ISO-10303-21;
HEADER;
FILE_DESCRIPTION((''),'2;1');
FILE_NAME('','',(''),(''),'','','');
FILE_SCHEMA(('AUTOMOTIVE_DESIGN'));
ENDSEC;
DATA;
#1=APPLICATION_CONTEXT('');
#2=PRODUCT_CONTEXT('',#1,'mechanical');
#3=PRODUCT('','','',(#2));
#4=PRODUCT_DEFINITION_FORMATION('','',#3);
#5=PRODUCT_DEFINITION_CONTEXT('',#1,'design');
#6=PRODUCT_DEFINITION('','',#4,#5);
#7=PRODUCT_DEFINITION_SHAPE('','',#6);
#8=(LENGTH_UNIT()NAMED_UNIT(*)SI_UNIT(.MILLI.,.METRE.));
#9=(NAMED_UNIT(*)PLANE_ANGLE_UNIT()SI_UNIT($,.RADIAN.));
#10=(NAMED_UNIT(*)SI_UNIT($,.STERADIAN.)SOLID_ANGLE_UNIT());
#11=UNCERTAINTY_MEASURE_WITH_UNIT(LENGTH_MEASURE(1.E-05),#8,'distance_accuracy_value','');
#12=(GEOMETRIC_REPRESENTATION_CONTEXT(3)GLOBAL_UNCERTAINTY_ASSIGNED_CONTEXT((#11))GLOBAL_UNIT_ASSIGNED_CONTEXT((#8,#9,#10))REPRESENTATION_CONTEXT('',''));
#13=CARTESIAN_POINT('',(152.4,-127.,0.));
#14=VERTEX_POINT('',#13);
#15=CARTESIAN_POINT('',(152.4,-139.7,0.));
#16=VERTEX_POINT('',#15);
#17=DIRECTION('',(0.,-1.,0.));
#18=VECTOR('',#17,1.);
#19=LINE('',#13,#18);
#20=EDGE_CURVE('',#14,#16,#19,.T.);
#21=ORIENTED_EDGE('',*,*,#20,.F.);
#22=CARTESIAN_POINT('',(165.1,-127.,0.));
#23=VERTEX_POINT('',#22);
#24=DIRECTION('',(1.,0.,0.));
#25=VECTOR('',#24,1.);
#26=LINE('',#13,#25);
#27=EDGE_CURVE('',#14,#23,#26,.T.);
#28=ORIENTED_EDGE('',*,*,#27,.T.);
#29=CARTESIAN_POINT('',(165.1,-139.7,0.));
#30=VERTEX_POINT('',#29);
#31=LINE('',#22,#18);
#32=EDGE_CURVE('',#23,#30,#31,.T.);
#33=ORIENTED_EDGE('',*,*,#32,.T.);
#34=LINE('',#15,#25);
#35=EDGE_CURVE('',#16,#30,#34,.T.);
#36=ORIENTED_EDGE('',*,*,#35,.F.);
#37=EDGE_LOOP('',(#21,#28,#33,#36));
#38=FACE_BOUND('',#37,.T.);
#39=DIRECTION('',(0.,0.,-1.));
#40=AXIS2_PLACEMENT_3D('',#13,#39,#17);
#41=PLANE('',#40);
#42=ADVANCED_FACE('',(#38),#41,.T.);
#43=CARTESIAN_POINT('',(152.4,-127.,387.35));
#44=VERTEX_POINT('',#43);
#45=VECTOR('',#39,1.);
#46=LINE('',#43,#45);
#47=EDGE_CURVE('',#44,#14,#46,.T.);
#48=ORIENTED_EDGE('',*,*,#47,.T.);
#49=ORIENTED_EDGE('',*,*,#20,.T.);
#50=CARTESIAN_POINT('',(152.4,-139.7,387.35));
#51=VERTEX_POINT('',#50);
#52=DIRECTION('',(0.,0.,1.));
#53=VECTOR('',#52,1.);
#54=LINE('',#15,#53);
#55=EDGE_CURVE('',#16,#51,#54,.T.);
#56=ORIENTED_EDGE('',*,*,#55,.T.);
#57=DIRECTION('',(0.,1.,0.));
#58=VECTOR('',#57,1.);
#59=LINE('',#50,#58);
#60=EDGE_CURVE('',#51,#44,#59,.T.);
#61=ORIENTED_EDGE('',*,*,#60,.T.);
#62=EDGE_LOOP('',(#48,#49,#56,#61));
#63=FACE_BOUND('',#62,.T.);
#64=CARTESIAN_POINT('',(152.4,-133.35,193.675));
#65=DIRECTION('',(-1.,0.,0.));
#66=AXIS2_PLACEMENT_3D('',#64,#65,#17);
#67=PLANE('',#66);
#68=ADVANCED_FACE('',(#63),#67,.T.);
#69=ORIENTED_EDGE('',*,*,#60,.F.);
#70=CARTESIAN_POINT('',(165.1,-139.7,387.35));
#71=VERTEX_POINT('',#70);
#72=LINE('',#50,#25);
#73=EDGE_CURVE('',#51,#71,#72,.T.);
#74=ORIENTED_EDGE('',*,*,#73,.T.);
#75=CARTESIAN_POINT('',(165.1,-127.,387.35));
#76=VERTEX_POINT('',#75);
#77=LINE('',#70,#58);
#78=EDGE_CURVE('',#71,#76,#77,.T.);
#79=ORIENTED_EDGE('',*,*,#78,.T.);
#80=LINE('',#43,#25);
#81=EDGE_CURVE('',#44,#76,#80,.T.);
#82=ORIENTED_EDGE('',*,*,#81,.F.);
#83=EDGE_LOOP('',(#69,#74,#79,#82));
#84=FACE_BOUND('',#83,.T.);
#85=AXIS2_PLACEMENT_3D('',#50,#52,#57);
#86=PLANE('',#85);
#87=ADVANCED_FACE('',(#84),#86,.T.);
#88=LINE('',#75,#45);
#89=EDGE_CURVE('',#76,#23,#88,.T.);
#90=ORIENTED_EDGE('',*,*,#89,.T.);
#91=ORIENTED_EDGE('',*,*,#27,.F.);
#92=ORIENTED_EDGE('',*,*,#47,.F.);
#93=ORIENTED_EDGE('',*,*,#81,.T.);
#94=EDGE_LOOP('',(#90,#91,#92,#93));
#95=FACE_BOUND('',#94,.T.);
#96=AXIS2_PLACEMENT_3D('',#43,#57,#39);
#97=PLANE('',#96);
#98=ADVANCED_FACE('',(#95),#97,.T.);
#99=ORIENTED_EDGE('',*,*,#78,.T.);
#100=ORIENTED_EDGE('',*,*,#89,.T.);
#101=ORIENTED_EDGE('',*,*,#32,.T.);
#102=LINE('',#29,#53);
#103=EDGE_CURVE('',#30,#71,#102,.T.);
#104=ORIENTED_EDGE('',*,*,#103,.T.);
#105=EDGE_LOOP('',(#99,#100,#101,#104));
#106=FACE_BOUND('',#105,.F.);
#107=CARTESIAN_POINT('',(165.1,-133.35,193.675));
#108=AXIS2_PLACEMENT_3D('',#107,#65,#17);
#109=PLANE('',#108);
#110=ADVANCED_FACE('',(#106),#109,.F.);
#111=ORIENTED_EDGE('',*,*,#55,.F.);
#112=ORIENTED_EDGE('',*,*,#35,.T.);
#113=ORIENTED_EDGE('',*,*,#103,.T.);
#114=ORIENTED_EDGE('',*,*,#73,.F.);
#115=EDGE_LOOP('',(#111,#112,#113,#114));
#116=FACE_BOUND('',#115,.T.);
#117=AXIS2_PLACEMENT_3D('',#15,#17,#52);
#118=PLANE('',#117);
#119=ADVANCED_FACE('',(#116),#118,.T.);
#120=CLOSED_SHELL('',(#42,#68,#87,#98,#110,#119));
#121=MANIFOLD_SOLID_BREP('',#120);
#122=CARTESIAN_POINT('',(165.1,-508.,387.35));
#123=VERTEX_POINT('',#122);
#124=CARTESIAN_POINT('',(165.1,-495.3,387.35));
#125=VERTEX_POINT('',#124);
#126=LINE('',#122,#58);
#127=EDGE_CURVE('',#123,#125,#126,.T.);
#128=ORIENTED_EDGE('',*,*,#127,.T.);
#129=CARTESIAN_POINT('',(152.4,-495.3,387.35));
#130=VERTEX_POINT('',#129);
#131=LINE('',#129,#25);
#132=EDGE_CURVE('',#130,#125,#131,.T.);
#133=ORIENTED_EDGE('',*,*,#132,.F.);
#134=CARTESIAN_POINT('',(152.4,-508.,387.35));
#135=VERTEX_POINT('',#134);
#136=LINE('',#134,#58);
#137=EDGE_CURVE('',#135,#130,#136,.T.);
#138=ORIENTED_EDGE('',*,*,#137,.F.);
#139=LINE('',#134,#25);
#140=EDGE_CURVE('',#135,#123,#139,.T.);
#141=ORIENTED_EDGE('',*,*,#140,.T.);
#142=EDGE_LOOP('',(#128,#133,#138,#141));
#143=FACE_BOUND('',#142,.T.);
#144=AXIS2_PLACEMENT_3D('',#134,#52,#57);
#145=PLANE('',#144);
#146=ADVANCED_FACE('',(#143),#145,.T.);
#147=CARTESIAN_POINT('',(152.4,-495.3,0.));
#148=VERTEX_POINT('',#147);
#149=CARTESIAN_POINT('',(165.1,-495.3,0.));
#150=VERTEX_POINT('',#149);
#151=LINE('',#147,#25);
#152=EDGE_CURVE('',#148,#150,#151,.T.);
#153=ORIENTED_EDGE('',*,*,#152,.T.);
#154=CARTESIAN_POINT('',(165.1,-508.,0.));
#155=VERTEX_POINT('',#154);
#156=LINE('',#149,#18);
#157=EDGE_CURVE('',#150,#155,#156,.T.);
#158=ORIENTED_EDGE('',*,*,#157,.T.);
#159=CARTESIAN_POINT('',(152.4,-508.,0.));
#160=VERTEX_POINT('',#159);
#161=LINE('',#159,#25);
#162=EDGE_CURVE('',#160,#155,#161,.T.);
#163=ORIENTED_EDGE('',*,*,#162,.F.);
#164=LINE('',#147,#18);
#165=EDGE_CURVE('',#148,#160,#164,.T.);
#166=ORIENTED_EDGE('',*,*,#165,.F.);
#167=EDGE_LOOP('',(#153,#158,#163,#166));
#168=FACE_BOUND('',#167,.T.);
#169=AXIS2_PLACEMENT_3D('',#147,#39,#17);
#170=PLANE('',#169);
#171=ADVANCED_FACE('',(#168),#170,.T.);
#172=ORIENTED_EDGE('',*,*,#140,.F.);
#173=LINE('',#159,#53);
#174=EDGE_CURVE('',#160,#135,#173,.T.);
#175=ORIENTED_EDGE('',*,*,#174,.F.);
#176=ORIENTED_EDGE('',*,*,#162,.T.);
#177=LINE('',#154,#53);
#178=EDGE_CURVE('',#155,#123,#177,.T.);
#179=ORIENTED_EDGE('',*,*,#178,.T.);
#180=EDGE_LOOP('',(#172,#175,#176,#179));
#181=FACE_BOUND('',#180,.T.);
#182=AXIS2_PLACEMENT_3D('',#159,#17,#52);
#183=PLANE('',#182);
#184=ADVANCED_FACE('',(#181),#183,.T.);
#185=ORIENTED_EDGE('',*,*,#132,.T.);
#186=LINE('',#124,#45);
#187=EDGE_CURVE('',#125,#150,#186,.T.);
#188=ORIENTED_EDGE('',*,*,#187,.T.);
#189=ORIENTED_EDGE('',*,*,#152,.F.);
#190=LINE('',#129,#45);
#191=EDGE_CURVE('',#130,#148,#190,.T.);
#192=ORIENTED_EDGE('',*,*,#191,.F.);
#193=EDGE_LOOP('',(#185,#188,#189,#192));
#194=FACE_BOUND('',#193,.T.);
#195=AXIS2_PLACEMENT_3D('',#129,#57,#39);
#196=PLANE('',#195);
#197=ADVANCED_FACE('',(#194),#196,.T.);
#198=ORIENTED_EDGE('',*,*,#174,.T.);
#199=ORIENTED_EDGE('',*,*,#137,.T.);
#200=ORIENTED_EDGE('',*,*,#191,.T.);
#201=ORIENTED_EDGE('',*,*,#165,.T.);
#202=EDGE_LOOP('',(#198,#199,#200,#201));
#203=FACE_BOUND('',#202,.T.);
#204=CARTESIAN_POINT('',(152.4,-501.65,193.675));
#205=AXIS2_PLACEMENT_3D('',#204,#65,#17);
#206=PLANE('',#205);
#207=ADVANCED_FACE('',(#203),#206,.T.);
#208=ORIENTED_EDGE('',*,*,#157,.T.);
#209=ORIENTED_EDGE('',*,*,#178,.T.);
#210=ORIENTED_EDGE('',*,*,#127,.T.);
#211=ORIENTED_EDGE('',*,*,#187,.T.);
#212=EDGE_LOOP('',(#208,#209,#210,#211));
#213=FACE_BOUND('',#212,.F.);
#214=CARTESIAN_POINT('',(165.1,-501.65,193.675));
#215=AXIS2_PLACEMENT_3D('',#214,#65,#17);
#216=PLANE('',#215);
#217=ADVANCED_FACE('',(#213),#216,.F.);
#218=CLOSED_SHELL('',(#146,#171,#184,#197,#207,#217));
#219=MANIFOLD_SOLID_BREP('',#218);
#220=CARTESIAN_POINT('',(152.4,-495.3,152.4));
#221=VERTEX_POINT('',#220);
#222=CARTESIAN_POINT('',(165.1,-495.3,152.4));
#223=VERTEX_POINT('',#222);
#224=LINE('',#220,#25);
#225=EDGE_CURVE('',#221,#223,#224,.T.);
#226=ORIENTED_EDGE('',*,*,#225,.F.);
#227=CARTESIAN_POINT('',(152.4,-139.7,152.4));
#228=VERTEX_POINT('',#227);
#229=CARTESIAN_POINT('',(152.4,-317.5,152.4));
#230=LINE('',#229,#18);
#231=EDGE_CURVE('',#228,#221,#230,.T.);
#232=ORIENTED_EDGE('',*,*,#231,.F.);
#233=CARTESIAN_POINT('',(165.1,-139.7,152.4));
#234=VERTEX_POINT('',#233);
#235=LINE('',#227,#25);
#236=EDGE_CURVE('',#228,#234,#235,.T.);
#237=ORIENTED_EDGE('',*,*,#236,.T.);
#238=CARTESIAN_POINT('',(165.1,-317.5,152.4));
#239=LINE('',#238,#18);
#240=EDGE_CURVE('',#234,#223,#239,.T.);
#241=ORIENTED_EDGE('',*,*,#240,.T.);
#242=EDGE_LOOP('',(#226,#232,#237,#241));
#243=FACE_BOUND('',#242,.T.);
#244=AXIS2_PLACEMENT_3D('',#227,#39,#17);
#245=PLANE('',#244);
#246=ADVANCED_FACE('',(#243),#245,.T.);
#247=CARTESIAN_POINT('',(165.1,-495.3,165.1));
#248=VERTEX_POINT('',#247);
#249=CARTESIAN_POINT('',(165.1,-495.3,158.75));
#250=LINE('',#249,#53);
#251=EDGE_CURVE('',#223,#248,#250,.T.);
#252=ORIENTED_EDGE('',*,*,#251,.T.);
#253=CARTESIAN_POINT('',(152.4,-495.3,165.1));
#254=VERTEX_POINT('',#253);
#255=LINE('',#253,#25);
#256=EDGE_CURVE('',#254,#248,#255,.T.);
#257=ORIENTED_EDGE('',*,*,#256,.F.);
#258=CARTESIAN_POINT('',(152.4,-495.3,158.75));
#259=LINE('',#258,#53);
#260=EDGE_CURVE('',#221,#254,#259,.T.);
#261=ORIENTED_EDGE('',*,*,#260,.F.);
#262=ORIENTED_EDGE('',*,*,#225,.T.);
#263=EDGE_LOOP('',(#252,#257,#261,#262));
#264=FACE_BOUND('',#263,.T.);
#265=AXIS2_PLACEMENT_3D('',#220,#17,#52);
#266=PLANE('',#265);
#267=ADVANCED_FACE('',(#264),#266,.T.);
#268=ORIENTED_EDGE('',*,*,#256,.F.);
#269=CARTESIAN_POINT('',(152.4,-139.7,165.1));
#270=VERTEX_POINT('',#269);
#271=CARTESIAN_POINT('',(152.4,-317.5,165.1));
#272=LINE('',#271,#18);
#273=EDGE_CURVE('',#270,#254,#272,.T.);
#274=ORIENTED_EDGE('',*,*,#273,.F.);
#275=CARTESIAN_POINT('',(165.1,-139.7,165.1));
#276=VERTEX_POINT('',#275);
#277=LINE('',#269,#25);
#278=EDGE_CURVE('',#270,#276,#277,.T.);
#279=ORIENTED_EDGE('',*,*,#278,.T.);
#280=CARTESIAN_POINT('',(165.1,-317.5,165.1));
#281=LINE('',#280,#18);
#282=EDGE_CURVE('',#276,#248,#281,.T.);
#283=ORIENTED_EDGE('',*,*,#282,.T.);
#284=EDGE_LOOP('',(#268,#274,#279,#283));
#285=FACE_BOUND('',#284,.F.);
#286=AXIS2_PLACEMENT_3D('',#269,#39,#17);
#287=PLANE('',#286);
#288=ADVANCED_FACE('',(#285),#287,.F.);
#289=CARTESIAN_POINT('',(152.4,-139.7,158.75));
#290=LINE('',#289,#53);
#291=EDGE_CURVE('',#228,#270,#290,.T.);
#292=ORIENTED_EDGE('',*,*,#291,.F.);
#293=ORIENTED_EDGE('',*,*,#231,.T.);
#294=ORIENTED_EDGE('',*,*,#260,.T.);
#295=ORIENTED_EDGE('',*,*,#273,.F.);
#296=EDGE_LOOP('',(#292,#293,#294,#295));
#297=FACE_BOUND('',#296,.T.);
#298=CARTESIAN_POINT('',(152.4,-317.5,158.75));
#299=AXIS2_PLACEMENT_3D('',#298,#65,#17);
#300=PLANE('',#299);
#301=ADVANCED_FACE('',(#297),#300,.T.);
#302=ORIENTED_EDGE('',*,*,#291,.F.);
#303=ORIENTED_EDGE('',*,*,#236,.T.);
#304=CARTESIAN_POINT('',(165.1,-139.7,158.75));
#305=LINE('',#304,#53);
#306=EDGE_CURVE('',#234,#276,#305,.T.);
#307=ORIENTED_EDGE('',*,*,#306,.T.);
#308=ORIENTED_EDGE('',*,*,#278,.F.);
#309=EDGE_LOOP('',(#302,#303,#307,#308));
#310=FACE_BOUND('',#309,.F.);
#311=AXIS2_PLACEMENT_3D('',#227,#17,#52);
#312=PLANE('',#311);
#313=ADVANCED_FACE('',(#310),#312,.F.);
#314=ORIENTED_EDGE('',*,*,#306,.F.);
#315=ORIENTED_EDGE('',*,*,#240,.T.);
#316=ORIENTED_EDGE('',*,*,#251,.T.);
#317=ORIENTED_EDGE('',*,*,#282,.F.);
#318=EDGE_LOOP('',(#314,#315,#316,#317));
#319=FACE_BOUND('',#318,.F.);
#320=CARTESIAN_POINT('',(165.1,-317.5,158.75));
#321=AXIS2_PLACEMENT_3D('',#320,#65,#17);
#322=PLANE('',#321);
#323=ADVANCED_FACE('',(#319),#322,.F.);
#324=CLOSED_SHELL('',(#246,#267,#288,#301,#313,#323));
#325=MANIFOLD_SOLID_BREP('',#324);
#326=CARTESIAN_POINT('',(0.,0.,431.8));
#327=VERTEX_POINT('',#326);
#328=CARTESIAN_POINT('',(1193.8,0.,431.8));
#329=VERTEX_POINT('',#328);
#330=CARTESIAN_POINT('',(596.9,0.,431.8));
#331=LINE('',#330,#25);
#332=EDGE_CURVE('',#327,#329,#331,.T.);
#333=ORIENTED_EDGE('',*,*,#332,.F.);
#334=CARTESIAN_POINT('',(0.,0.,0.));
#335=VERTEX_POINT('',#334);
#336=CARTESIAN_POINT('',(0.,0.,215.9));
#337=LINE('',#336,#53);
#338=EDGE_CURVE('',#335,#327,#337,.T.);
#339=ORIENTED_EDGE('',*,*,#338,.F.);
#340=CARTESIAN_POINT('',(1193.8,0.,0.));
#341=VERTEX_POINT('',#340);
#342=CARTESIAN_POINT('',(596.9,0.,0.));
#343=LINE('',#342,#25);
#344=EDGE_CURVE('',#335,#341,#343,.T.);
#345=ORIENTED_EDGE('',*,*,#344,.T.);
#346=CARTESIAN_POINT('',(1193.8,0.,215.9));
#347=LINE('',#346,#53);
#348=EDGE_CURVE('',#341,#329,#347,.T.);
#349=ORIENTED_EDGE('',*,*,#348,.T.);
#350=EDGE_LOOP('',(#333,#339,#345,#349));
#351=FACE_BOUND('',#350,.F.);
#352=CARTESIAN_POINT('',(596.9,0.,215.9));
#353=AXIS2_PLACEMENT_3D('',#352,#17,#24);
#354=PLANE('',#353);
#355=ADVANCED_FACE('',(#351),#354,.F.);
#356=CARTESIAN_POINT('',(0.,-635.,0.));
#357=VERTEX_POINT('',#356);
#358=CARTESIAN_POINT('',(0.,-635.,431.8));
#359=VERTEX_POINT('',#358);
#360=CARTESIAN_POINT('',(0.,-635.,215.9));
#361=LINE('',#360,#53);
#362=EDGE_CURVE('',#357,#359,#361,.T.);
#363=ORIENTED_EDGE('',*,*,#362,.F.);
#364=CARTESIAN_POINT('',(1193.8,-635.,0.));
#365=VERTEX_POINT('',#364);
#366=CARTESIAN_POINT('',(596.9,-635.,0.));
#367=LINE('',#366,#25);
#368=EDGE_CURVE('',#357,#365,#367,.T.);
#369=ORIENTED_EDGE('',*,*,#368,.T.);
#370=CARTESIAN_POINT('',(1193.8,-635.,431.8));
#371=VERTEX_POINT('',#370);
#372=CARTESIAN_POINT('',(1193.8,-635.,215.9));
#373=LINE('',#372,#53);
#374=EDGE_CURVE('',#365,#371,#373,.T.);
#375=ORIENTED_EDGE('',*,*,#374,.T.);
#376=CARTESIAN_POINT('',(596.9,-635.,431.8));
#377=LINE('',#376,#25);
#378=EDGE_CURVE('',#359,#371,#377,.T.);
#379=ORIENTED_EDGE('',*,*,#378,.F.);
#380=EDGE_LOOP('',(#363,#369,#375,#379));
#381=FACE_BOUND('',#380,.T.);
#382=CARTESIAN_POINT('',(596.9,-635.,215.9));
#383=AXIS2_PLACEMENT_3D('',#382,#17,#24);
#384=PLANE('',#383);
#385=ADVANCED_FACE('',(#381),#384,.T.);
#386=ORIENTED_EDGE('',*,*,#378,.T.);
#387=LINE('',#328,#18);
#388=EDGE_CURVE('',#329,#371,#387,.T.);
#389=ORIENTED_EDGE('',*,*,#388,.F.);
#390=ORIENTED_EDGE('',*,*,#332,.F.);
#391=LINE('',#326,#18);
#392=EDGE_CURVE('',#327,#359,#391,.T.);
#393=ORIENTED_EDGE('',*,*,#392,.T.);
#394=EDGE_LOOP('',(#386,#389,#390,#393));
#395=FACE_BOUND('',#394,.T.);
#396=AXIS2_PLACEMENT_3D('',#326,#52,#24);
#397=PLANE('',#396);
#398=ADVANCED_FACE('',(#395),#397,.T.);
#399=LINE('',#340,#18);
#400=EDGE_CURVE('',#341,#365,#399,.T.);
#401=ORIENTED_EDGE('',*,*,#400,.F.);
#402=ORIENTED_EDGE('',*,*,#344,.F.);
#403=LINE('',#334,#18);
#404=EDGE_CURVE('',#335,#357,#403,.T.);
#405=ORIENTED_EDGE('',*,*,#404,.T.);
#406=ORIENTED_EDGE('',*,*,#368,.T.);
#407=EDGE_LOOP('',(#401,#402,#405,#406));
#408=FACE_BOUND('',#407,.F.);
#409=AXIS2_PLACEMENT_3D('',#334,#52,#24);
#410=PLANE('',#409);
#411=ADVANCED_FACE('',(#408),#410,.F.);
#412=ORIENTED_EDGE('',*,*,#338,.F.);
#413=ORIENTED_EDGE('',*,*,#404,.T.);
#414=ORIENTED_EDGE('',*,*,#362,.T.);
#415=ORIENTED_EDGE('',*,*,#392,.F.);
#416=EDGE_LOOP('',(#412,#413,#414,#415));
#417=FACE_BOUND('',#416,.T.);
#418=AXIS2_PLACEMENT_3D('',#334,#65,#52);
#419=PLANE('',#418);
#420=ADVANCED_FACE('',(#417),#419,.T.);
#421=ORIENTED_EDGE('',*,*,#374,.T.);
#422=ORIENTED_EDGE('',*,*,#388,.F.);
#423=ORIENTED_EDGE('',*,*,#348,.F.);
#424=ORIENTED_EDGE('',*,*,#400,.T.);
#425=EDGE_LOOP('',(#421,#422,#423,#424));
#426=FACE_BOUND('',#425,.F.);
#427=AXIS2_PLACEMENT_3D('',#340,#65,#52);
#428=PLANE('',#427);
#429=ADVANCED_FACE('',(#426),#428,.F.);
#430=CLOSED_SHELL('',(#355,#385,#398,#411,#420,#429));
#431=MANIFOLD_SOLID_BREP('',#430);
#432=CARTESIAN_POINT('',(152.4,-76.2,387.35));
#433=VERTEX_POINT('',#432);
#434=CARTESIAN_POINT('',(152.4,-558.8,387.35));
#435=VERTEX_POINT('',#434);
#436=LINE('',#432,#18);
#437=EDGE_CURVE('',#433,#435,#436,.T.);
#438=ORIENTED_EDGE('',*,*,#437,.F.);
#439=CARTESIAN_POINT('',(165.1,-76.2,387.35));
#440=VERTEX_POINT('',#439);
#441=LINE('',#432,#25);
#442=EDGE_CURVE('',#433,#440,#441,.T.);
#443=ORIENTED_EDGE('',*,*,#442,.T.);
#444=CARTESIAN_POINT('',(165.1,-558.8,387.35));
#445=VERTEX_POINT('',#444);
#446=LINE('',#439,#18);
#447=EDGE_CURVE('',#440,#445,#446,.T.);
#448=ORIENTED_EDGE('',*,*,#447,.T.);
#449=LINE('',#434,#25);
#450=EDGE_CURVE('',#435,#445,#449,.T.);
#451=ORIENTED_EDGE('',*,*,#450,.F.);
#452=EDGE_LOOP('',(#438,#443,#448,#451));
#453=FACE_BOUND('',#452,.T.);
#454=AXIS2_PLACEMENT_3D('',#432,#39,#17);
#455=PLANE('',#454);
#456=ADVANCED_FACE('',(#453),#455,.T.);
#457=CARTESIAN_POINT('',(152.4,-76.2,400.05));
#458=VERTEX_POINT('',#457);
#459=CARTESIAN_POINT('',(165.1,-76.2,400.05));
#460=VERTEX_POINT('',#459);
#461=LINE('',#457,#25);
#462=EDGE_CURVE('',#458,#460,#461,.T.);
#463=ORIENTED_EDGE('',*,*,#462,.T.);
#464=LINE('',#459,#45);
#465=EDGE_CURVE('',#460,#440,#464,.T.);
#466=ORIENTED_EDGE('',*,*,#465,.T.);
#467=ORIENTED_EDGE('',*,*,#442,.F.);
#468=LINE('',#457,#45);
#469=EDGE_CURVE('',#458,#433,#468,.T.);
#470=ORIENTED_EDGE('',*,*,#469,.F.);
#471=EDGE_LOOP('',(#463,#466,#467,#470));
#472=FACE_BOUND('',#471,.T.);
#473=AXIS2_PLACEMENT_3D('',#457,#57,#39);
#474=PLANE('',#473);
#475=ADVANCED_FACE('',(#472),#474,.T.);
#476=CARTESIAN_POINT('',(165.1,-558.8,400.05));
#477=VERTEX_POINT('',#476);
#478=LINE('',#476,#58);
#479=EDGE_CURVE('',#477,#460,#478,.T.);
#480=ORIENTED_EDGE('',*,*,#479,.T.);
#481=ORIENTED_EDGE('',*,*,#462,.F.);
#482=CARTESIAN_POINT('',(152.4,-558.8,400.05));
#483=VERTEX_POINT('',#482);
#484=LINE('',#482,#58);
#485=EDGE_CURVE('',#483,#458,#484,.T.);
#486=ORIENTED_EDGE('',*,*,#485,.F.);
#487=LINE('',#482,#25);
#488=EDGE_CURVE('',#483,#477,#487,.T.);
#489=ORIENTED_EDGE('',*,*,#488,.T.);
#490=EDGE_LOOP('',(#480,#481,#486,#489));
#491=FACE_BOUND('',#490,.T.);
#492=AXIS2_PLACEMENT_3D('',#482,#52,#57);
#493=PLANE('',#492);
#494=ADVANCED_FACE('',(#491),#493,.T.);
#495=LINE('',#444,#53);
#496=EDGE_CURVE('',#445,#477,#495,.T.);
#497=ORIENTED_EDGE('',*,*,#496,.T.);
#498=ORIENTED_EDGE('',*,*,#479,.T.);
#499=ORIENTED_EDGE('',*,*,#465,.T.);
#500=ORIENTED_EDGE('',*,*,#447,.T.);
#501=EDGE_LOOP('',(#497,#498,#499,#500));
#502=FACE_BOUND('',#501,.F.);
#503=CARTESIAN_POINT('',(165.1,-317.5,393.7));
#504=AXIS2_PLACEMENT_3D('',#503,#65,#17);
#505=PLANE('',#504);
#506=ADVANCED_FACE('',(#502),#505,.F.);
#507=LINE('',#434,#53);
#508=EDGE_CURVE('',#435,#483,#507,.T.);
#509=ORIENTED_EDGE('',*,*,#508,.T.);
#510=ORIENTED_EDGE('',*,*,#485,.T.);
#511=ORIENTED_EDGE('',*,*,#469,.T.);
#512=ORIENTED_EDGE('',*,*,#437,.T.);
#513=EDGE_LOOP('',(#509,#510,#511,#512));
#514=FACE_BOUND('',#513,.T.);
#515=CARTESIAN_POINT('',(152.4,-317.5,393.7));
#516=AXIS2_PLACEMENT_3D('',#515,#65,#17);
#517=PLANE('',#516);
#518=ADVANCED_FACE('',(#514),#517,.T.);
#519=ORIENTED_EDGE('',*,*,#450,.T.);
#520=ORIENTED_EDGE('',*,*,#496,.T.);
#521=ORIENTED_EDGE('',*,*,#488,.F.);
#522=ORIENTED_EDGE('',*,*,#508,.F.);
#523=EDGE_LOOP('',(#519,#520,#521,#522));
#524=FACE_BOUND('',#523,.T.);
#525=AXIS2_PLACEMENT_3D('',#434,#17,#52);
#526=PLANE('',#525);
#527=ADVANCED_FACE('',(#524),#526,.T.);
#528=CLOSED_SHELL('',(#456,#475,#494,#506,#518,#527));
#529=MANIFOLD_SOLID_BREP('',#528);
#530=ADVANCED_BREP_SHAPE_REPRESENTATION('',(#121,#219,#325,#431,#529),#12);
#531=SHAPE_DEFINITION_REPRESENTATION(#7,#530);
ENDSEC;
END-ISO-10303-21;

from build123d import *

# Parameters (mm, degrees)
F2_W     = 1193.8
F2_H     = 431.8
F3_DEPTH = 635
F6_DEPTH = 12.7
F7_DEPTH = 12.7
F5_W     = 355.6
F5_H     = 12.7
F8_DEPTH = 12.7
F9_DEPTH = 12.7


# Not quite as in the source:
# - a variable given as a bare number and used for a length is read in inches; the dataset says mm whatever the document's units were


with BuildPart() as f3:
    # F2 (on Front) → F3 (new body)
    with BuildSketch(Plane.XZ):
        with Locations((596.9, 215.9)):
            Rectangle(F2_W, F2_H)
    extrude(amount=F3_DEPTH)


with BuildPart() as f6:
    # F5 (on offset) → F6 (new body)
    with BuildSketch(Plane(origin=(152.4, 0, 0), x_dir=(0, -1, 0), z_dir=(-1, 0, 0))):
        Polygon((76.2, 387.35), (127, 387.35), (139.7, 387.35), (495.3, 387.35), (508, 387.35), (558.8, 387.35), (558.8, 400.05), (76.2, 400.05), align=None)
    extrude(amount=-F6_DEPTH)


with BuildPart() as f7:
    # F5 (on offset) → F7 (new body)
    with BuildSketch(Plane(origin=(152.4, 0, 0), x_dir=(0, -1, 0), z_dir=(-1, 0, 0))):
        Polygon((127, 387.35), (127, 0), (139.7, 0), (139.7, 152.4), (139.7, 165.1), (139.7, 387.35), align=None)
    extrude(amount=-F7_DEPTH)


with BuildPart() as f8:
    # F5 (on offset) → F8 (new body)
    with BuildSketch(Plane(origin=(152.4, 0, 0), x_dir=(0, -1, 0), z_dir=(-1, 0, 0))):
        with Locations((317.5, 158.75)):
            Rectangle(F5_W, F5_H)
    extrude(amount=-F8_DEPTH)


with BuildPart() as f9:
    # F5 (on offset) → F9 (new body)
    with BuildSketch(Plane(origin=(152.4, 0, 0), x_dir=(0, -1, 0), z_dir=(-1, 0, 0))):
        Polygon((495.3, 165.1), (495.3, 152.4), (495.3, 0), (508, 0), (508, 387.35), (495.3, 387.35), align=None)
    extrude(amount=-F9_DEPTH)


solid = Compound([f3.part, f6.part, f7.part, f8.part, f9.part])
